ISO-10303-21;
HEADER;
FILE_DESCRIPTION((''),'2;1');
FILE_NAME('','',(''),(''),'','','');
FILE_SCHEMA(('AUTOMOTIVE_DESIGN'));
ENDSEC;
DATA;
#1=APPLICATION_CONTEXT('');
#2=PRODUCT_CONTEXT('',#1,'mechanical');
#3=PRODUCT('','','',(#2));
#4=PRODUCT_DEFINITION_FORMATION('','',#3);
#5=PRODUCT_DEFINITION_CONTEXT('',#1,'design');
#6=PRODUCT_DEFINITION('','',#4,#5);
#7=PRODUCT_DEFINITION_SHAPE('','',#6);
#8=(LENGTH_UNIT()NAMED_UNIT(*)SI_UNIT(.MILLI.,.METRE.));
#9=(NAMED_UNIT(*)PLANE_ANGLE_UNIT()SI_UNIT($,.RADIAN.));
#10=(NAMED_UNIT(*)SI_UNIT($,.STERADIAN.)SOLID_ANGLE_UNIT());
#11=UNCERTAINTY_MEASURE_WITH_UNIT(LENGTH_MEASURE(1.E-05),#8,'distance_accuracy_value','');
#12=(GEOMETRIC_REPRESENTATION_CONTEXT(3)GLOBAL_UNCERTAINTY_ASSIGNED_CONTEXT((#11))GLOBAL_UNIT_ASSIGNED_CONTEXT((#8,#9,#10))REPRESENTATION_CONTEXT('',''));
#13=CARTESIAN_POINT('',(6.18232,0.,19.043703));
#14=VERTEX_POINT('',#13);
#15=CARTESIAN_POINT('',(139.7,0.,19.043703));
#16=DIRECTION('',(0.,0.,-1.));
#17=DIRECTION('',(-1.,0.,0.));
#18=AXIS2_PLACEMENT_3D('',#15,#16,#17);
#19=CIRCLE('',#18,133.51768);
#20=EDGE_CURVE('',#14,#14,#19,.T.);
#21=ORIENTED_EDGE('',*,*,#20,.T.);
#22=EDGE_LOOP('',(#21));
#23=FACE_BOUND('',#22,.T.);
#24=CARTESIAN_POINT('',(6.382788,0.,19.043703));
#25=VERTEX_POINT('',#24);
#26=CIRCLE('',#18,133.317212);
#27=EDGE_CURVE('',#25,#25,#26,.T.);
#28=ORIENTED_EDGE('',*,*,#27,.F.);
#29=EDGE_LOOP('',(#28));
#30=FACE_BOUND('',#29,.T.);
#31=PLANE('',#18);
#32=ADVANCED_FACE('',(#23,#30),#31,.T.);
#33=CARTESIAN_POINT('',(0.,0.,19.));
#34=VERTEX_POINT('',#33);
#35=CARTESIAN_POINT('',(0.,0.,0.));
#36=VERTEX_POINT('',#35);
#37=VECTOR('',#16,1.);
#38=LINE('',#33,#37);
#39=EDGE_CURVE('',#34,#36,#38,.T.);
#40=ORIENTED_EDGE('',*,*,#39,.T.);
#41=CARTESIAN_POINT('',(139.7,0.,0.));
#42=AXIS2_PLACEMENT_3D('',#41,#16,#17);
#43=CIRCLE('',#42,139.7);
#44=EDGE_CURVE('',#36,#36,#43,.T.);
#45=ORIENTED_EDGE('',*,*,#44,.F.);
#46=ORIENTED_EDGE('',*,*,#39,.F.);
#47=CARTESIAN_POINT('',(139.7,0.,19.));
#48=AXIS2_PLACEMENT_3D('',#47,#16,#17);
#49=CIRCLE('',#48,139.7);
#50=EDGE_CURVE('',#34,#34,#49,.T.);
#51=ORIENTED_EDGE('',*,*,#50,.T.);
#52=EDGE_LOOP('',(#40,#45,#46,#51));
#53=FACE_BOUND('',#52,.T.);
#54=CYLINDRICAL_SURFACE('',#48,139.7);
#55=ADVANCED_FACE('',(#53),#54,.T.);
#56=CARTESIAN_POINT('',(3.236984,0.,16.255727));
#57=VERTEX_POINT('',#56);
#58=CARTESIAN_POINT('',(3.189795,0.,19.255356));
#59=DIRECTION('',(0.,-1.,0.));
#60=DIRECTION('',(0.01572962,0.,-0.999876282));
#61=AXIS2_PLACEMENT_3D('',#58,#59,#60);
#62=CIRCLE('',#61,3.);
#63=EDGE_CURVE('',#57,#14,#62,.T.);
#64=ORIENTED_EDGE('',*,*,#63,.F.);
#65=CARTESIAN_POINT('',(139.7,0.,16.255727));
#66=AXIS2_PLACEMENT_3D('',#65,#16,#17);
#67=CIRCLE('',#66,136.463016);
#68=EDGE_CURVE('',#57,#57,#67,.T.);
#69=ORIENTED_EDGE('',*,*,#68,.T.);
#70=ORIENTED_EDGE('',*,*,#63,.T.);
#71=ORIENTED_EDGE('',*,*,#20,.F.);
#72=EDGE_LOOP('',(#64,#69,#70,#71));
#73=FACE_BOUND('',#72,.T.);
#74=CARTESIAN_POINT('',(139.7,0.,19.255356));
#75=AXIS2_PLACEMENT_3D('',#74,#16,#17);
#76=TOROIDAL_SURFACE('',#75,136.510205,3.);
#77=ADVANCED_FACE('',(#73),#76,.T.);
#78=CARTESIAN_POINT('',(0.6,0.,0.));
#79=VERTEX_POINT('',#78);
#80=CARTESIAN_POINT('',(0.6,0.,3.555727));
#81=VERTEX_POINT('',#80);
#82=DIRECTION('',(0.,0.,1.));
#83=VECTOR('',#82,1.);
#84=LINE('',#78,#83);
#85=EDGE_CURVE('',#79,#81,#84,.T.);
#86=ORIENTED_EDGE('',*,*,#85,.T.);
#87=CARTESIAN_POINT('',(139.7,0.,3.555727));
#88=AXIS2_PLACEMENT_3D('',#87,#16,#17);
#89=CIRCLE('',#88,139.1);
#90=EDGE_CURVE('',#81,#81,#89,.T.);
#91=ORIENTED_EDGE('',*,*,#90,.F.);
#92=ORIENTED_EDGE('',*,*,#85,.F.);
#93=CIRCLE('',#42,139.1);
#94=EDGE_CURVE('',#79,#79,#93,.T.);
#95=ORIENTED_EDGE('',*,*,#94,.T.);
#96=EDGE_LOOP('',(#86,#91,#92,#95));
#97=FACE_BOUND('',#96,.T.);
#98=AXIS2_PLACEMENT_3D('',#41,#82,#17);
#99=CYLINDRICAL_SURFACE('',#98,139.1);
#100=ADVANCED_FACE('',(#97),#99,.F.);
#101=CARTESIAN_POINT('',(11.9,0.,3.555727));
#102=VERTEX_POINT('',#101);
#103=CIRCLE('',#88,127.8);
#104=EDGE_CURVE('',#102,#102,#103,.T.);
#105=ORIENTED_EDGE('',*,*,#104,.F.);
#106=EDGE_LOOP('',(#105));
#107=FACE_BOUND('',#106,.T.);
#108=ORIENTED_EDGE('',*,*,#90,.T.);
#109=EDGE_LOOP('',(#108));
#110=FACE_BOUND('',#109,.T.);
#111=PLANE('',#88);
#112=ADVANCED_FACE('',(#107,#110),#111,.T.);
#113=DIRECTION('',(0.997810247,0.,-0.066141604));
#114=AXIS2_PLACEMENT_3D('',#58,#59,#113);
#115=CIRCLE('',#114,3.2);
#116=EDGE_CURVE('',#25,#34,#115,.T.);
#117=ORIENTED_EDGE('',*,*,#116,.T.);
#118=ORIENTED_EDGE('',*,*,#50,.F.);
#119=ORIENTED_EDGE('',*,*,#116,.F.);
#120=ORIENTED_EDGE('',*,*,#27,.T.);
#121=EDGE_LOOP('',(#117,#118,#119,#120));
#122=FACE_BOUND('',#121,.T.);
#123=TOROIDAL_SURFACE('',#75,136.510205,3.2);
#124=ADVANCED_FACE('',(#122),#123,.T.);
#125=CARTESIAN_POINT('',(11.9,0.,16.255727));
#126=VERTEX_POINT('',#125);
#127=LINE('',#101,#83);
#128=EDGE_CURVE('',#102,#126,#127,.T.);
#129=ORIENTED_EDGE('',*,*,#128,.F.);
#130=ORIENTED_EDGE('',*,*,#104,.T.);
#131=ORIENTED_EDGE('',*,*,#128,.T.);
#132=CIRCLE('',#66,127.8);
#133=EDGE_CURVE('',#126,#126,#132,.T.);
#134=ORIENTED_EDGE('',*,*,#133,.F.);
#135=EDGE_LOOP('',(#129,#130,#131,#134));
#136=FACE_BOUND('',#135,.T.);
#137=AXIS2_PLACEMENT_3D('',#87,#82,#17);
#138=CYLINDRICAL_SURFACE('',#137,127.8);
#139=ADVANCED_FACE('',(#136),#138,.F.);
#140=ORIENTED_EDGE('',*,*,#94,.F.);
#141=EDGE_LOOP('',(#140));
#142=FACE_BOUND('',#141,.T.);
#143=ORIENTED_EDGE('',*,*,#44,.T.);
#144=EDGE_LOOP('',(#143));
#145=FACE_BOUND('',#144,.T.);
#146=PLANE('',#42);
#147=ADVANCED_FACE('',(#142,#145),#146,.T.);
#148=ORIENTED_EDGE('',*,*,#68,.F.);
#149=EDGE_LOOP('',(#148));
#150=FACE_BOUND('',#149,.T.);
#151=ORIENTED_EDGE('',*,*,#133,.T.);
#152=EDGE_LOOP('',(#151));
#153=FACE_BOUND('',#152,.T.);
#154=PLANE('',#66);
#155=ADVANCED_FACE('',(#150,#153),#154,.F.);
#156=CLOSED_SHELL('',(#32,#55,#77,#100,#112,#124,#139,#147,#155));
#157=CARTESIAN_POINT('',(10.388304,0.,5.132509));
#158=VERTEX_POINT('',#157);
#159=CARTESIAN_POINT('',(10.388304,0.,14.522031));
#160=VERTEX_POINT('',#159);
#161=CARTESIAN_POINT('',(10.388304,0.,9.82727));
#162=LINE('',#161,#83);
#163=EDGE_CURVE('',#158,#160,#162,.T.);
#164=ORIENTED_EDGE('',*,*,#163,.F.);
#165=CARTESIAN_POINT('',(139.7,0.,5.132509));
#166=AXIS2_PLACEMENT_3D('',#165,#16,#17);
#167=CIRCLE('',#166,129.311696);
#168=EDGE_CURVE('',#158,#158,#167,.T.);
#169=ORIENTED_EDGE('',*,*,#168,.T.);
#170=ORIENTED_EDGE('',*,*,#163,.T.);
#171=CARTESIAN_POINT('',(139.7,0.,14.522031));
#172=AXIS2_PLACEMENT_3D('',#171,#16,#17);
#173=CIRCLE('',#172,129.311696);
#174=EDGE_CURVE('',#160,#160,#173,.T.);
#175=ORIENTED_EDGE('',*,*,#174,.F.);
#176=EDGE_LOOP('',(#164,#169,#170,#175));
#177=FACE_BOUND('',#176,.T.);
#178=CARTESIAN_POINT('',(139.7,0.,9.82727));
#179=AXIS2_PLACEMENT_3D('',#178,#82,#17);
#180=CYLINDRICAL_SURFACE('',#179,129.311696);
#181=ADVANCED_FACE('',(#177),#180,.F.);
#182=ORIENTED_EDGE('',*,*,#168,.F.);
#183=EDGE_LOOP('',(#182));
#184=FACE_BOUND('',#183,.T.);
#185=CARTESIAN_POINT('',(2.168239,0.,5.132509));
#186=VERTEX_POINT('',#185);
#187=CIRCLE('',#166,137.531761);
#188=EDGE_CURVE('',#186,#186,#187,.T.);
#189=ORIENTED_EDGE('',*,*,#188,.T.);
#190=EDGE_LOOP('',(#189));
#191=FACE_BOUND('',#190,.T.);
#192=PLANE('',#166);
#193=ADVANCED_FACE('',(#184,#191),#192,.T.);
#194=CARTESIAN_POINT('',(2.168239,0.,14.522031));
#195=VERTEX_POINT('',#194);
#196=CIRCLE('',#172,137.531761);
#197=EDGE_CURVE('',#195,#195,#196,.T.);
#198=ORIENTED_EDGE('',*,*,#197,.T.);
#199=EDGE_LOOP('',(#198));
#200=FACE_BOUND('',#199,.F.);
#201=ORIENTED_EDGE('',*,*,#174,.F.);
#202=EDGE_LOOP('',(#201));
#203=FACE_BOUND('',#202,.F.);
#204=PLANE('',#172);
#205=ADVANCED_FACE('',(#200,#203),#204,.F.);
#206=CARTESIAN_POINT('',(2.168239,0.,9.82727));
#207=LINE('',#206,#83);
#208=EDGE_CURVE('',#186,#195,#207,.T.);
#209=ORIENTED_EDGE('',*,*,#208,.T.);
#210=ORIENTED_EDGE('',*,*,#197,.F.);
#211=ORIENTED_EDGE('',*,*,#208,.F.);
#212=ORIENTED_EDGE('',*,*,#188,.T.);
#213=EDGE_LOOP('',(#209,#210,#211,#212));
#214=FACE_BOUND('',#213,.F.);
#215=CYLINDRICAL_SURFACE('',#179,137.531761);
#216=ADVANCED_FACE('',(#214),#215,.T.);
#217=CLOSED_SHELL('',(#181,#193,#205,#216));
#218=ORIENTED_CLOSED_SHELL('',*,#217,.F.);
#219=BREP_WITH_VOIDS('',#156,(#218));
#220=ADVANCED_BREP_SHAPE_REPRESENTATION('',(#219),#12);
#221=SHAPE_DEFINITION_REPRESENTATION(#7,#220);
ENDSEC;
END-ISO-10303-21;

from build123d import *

# Parameters (mm, degrees)
F0_W = 8.2200646866
F0_H = 9.3895217869


# Not quite as in the source:
# - a feature names something its author has since deleted; it is built from what else it names


with BuildPart() as f1:
    # F0 (on Front) → F1 (revolve)
    with BuildSketch(Plane.XZ):
        with BuildLine():
            Line((0, 19), (0, 0))
            Line((0, 0), (0.6, 0))
            Line((0.6, 0), (0.6, 3.5557271383))
            Line((0.6, 3.5557271383), (11.9, 3.5557271383))
            Line((11.9, 3.5557271383), (11.9, 16.2557271383))
            Line((11.9, 16.2557271383), (3.2369840445, 16.2557271383))
            ThreePointArc((3.2369840445, 16.2557271383), (5.2521158412, 17.0766330758), (6.1823196963, 19.0437028519))
            Line((6.1823196963, 19.0437028519), (6.3827879741, 19.0437028519))
            ThreePointArc((6.3827879741, 19.0437028519), (3.1678853473, 22.4552809766), (0, 19))
        make_face()
        with Locations((6.2782712048, 9.8272700561)):
            Rectangle(F0_W, F0_H, mode=Mode.SUBTRACT)
    revolve(axis=Axis((139.7, 0, -5.7849194854), (0, 0, -1)))


solid = f1.part
